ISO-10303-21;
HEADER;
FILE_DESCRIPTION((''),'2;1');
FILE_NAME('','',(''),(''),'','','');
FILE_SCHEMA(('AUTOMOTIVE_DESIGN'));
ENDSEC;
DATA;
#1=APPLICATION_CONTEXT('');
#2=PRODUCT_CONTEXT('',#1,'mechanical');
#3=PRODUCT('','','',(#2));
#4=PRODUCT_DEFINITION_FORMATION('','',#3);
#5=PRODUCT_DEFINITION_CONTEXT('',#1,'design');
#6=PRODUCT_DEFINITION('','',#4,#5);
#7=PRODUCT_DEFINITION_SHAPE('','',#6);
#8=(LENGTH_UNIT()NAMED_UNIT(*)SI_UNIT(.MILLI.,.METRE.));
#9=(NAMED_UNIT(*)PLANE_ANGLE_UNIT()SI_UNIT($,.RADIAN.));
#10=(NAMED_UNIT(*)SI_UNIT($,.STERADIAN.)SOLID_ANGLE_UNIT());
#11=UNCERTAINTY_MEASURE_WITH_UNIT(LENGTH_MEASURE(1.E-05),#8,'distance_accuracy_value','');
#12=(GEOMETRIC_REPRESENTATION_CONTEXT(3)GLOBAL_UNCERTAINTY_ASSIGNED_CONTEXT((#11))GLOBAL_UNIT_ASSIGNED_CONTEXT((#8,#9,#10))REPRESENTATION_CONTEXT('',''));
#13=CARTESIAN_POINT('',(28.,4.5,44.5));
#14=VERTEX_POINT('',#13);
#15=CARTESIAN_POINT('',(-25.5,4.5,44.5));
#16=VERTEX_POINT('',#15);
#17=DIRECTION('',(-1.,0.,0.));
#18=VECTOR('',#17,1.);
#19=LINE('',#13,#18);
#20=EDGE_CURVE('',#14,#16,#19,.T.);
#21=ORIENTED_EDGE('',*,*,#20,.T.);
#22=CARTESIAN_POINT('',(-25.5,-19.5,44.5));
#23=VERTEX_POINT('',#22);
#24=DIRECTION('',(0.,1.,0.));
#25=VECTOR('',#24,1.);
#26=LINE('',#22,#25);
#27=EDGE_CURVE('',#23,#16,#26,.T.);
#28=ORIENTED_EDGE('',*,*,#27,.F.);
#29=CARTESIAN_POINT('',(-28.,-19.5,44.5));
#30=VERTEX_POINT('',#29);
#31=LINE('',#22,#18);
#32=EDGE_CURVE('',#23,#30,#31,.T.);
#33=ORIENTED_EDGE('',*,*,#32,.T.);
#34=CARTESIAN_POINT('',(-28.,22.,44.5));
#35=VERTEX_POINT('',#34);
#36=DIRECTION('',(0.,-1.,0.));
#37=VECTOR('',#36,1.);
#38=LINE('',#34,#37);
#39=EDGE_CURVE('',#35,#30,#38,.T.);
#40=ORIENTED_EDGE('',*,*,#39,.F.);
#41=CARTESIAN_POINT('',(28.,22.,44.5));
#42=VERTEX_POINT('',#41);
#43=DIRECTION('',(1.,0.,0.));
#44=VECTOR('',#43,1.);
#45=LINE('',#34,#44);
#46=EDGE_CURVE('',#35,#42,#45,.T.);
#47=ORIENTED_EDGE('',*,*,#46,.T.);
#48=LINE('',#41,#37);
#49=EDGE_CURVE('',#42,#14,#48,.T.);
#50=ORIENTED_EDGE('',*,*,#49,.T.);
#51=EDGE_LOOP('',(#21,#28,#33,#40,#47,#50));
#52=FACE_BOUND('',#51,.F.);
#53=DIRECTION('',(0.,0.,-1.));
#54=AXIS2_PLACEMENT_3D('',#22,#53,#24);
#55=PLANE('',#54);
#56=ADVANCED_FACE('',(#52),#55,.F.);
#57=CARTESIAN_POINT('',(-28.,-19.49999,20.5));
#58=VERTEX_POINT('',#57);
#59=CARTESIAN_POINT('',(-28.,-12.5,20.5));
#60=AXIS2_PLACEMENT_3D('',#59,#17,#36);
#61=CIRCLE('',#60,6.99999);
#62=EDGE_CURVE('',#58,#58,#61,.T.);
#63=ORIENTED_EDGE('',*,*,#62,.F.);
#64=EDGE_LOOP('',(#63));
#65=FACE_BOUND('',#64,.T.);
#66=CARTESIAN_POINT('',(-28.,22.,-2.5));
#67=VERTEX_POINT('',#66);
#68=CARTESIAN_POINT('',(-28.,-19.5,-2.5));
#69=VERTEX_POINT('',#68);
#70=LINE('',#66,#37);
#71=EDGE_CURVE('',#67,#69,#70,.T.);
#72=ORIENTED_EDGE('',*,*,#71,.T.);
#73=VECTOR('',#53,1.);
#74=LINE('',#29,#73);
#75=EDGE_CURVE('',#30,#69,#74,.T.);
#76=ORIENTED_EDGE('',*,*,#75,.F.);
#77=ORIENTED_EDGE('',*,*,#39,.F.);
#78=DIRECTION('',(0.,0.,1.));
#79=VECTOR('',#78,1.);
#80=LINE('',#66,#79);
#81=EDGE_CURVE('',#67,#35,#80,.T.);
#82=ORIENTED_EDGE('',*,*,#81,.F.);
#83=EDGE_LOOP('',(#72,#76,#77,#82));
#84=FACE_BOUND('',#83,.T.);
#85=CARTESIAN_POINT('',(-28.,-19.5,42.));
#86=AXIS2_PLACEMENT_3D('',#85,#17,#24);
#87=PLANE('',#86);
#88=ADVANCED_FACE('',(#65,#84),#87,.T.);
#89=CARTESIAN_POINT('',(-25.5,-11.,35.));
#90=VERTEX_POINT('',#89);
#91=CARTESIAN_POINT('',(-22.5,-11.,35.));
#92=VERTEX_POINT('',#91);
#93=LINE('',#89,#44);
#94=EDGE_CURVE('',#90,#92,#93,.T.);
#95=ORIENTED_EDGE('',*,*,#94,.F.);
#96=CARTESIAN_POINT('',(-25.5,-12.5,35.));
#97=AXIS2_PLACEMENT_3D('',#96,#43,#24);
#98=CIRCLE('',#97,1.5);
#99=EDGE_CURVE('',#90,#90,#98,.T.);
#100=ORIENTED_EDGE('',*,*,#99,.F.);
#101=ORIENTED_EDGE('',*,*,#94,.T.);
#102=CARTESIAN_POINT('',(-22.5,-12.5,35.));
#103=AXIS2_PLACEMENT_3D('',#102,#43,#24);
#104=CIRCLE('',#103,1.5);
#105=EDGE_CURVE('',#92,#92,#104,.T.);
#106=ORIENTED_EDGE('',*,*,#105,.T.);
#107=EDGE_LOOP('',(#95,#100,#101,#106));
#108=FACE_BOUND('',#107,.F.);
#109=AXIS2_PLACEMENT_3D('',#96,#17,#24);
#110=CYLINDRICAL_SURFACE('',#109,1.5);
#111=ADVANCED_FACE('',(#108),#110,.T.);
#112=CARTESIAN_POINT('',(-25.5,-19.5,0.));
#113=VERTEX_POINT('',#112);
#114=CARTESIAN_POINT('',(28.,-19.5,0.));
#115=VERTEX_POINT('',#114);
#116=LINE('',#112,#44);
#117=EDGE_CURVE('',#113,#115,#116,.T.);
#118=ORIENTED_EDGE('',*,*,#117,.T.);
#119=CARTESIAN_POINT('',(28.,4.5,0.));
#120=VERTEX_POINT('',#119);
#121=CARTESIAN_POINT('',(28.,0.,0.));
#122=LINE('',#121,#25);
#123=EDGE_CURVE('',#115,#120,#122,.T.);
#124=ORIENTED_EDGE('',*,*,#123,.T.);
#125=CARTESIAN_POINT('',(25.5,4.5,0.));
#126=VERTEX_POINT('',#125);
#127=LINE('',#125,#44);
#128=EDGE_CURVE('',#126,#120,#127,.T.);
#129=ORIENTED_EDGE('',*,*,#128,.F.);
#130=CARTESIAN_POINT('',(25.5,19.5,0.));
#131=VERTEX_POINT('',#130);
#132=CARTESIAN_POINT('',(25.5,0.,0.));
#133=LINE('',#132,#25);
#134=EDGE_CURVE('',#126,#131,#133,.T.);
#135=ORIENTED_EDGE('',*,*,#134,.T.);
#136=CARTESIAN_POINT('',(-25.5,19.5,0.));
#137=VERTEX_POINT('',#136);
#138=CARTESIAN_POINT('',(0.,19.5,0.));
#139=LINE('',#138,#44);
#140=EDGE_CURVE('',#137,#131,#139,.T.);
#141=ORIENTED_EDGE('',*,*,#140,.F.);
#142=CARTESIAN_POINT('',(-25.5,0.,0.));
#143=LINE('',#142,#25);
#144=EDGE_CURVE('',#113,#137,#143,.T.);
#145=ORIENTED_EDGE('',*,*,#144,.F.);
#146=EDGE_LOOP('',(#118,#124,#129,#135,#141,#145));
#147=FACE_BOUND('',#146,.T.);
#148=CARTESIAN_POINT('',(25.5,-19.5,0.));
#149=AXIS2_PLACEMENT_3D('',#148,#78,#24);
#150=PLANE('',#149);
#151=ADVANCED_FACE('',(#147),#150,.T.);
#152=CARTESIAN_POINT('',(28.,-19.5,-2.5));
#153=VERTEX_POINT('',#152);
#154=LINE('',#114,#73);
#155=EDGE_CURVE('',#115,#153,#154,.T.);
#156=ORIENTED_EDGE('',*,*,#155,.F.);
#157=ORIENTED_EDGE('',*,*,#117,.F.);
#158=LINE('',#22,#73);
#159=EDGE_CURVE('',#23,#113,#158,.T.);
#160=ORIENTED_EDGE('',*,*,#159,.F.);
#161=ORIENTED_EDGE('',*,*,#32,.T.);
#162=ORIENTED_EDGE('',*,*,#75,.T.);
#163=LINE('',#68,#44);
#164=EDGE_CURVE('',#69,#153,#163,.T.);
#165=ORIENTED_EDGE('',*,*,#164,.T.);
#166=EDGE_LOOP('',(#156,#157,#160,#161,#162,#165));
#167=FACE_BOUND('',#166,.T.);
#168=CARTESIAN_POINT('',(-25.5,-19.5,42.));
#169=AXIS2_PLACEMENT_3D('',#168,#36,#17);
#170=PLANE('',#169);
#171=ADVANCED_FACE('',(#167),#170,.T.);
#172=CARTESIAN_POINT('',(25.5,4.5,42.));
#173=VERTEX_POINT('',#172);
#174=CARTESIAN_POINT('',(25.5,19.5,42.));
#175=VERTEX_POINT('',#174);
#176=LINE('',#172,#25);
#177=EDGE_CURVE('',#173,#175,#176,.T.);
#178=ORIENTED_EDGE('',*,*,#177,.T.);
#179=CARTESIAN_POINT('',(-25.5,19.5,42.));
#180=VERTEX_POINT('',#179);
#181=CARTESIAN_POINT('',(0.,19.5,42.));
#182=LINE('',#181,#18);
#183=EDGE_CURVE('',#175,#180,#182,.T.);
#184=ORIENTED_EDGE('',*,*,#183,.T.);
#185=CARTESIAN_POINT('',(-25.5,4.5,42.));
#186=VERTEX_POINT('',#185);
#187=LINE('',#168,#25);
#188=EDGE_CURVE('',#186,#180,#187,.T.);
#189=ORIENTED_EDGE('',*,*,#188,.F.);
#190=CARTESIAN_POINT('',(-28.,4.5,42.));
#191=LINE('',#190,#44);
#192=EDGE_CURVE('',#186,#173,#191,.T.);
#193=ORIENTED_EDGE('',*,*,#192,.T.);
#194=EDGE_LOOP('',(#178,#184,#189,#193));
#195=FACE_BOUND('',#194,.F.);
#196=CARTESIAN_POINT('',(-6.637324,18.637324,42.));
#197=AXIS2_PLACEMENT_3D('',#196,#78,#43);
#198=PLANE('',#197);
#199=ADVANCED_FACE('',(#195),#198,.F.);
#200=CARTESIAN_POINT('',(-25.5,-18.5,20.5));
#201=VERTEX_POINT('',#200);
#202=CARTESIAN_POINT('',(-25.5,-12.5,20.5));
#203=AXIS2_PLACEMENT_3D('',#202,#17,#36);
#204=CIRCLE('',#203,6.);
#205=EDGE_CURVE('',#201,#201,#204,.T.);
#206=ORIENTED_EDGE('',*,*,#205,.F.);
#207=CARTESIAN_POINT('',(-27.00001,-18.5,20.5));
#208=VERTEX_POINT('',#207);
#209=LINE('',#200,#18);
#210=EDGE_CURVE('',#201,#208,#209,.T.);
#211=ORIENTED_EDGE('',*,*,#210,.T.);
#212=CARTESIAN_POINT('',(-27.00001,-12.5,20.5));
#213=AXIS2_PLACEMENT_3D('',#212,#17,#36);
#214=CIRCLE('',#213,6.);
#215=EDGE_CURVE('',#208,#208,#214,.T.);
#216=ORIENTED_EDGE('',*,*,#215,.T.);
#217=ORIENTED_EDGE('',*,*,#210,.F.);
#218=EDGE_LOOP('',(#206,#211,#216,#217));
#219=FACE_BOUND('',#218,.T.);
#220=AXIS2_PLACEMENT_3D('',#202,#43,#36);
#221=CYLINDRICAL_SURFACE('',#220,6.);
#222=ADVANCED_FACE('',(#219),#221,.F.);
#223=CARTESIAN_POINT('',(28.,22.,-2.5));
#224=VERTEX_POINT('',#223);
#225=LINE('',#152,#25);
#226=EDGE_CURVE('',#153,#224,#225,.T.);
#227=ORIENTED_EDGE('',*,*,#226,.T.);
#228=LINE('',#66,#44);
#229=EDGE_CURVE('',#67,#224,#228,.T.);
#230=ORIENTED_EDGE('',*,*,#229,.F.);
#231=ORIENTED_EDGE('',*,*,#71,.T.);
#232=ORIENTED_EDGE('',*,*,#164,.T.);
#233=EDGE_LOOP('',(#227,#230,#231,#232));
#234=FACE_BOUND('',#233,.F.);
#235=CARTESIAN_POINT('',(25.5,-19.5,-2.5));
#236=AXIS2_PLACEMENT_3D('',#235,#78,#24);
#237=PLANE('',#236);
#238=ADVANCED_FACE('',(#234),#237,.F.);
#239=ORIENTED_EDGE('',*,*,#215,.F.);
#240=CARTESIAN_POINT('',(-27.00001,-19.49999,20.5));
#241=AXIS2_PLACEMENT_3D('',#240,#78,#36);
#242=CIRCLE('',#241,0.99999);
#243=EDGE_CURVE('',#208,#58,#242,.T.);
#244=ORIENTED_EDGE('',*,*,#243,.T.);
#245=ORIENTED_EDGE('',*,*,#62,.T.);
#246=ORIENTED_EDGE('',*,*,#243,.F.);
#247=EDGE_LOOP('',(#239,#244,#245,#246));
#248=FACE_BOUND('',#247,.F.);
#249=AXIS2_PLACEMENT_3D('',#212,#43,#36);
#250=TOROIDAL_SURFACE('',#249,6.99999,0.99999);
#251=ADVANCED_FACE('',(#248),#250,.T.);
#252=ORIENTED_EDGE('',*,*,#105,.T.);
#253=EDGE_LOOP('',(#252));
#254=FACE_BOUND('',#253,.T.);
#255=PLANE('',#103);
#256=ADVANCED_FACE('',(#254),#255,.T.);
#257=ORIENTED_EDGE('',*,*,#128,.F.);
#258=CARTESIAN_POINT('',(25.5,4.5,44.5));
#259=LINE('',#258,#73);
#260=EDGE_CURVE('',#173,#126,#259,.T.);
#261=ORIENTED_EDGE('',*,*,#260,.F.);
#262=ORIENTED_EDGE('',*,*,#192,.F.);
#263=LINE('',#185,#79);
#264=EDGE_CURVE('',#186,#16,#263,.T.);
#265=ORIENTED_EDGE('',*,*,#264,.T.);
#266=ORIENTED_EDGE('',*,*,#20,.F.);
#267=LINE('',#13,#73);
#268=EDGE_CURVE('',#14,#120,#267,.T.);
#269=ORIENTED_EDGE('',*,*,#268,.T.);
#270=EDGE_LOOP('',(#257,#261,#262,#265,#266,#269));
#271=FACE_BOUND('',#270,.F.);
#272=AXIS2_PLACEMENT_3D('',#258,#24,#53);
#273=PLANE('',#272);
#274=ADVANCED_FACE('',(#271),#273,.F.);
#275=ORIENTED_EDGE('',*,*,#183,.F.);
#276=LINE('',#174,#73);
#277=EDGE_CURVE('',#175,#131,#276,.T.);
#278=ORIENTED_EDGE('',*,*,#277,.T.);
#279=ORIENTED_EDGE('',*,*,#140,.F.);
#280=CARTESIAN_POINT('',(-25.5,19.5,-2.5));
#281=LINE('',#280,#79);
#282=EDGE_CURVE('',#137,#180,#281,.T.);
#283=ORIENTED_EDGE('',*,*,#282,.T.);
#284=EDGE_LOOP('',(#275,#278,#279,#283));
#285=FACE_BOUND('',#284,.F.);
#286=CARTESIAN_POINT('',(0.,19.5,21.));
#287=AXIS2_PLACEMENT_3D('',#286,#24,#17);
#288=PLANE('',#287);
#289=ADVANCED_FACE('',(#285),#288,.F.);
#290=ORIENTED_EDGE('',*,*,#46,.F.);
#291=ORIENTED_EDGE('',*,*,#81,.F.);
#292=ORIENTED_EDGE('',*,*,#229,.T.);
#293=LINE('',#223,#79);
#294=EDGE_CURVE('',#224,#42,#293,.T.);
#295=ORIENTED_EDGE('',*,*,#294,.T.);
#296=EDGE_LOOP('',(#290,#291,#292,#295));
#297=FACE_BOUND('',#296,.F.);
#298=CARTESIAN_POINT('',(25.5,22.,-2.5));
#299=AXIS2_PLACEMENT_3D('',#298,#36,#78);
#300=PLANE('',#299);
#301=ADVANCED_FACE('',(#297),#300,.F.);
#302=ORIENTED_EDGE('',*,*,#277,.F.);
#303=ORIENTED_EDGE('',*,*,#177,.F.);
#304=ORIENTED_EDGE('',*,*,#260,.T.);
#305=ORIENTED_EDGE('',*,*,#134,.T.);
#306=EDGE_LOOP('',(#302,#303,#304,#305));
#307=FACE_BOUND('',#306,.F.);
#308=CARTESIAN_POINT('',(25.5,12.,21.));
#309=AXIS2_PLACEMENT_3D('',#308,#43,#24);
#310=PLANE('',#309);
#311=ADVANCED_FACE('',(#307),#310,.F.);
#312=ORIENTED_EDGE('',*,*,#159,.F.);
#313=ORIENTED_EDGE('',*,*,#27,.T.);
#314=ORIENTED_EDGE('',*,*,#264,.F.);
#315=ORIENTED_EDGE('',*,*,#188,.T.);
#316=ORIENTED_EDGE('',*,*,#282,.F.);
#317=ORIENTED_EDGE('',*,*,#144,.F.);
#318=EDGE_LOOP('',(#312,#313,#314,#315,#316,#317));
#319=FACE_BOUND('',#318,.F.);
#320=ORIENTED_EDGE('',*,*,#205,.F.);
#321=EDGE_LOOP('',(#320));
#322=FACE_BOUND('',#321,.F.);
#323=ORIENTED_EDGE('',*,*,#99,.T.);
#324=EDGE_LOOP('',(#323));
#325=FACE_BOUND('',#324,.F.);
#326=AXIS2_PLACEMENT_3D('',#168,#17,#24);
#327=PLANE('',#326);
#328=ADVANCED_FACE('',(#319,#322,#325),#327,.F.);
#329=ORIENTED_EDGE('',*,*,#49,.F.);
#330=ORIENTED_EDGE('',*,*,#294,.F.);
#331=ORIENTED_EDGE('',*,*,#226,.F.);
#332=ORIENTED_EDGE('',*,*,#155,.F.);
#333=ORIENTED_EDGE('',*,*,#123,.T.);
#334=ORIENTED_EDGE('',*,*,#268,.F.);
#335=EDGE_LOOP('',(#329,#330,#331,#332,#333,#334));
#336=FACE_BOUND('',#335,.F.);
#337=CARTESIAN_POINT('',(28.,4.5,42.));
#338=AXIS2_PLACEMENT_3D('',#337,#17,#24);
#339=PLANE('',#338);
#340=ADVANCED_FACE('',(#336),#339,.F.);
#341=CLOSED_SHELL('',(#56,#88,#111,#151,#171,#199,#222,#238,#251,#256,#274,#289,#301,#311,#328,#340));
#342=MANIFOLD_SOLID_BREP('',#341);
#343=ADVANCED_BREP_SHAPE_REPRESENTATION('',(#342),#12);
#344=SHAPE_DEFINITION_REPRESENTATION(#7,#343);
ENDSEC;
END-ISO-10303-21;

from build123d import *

# Parameters (mm, degrees)
F0_W      = 51
F0_H      = 39
F1_DEPTH  = 2.5
F2_W      = 51
F2_H      = 42
F2_H_2    = 2.5
F3_DEPTH  = 2.5
F4_W      = 39
F4_H      = 42
F4_R      = 6
F5_DEPTH  = 2.5
F6_R      = 0.99999
F7_W      = 51
F7_H      = 15
F8_DEPTH  = 2.5
F9_W      = 15
F9_H      = 42
F10_DEPTH = 2.5
F11_R     = 1.5
F12_DEPTH = 3
F13_DEPTH = 2.5
F14_DEPTH = 2.5


# Not quite as in the source:
# - a fillet or chamfer is up to 0.001 mm smaller than in the source, because OpenCascade refuses the exact size


with BuildPart() as f1:
    # F0 (on Top) → F1 (new body)
    with BuildSketch(Plane.XY):
        Rectangle(F0_W, F0_H)
    extrude(amount=-F1_DEPTH)

    # F2 (on face) → F3 (join)
    with BuildSketch(Plane(origin=(0, 19.5, 0), x_dir=(-1, 0, 0), z_dir=(0, 1, 0))):
        with Locations((0, 21)):
            Rectangle(F2_W, F2_H)
        with Locations((0, -1.25)):
            Rectangle(F2_W, F2_H_2)
    extrude(amount=F3_DEPTH)

    # F4 (on face) → F5 (join)
    with BuildSketch(Plane(origin=(-25.5, 0, 0), x_dir=(0, -1, 0), z_dir=(-1, 0, 0))):
        with Locations((0, 21)):
            Rectangle(F4_W, F4_H)
        with Locations((12.5, 20.5)):
            Circle(F4_R, mode=Mode.SUBTRACT)
        Polygon((19.5, 0), (-19.5, 0), (-19.5, 42), (-22, 42), (-22, -2.5), (19.5, -2.5), align=None)
    extrude(amount=F5_DEPTH)

    # F6 (radius 1 in the source; OpenCascade refuses exactly that, so slightly less here)
    f6_edges = [f1.edges().sort_by_distance(p)[0] for p in [
        (-28, -6.5, 20.5),
    ]]
    fillet(f6_edges, radius=F6_R)

    # F7 (on face) → F8 (join)
    with BuildSketch(Plane.XY.offset(42)):
        Polygon((-25.5, 4.5), (-25.5, 19.5), (25.5, 19.5), (25.5, 22), (-28, 22), (-28, 4.5), align=None)
        with Locations((0, 12)):
            Rectangle(F7_W, F7_H)
    extrude(amount=F8_DEPTH)

    # F9 (on face) → F10 (join)
    with BuildSketch(Plane.YZ.offset(25.5)):
        with Locations((12, 21)):
            Rectangle(F9_W, F9_H)
        Polygon((4.5, 44.5), (4.5, 42), (19.5, 42), (19.5, 0), (4.5, 0), (4.5, -2.5), (22, -2.5), (22, 44.5), align=None)
    extrude(amount=F10_DEPTH)

    # F11 (on face) → F12 (join)
    with BuildSketch(Plane.YZ.offset(-25.5)):
        with Locations((-12.5, 35)):
            Circle(F11_R)
    extrude(amount=F12_DEPTH)

    # F13 (add): a face of the model
    f13_faces = [f1.faces().sort_by_distance(p)[0] for p in [
        (25.5, -7.5, -1.25),
    ]]
    extrude(f13_faces, amount=F13_DEPTH)

    # F14 (add): a face of the model
    f14_faces = [f1.faces().sort_by_distance(p)[0] for p in [
        (-26.75, -7.5, 42),
    ]]
    extrude(f14_faces, amount=F14_DEPTH)


solid = f1.part
